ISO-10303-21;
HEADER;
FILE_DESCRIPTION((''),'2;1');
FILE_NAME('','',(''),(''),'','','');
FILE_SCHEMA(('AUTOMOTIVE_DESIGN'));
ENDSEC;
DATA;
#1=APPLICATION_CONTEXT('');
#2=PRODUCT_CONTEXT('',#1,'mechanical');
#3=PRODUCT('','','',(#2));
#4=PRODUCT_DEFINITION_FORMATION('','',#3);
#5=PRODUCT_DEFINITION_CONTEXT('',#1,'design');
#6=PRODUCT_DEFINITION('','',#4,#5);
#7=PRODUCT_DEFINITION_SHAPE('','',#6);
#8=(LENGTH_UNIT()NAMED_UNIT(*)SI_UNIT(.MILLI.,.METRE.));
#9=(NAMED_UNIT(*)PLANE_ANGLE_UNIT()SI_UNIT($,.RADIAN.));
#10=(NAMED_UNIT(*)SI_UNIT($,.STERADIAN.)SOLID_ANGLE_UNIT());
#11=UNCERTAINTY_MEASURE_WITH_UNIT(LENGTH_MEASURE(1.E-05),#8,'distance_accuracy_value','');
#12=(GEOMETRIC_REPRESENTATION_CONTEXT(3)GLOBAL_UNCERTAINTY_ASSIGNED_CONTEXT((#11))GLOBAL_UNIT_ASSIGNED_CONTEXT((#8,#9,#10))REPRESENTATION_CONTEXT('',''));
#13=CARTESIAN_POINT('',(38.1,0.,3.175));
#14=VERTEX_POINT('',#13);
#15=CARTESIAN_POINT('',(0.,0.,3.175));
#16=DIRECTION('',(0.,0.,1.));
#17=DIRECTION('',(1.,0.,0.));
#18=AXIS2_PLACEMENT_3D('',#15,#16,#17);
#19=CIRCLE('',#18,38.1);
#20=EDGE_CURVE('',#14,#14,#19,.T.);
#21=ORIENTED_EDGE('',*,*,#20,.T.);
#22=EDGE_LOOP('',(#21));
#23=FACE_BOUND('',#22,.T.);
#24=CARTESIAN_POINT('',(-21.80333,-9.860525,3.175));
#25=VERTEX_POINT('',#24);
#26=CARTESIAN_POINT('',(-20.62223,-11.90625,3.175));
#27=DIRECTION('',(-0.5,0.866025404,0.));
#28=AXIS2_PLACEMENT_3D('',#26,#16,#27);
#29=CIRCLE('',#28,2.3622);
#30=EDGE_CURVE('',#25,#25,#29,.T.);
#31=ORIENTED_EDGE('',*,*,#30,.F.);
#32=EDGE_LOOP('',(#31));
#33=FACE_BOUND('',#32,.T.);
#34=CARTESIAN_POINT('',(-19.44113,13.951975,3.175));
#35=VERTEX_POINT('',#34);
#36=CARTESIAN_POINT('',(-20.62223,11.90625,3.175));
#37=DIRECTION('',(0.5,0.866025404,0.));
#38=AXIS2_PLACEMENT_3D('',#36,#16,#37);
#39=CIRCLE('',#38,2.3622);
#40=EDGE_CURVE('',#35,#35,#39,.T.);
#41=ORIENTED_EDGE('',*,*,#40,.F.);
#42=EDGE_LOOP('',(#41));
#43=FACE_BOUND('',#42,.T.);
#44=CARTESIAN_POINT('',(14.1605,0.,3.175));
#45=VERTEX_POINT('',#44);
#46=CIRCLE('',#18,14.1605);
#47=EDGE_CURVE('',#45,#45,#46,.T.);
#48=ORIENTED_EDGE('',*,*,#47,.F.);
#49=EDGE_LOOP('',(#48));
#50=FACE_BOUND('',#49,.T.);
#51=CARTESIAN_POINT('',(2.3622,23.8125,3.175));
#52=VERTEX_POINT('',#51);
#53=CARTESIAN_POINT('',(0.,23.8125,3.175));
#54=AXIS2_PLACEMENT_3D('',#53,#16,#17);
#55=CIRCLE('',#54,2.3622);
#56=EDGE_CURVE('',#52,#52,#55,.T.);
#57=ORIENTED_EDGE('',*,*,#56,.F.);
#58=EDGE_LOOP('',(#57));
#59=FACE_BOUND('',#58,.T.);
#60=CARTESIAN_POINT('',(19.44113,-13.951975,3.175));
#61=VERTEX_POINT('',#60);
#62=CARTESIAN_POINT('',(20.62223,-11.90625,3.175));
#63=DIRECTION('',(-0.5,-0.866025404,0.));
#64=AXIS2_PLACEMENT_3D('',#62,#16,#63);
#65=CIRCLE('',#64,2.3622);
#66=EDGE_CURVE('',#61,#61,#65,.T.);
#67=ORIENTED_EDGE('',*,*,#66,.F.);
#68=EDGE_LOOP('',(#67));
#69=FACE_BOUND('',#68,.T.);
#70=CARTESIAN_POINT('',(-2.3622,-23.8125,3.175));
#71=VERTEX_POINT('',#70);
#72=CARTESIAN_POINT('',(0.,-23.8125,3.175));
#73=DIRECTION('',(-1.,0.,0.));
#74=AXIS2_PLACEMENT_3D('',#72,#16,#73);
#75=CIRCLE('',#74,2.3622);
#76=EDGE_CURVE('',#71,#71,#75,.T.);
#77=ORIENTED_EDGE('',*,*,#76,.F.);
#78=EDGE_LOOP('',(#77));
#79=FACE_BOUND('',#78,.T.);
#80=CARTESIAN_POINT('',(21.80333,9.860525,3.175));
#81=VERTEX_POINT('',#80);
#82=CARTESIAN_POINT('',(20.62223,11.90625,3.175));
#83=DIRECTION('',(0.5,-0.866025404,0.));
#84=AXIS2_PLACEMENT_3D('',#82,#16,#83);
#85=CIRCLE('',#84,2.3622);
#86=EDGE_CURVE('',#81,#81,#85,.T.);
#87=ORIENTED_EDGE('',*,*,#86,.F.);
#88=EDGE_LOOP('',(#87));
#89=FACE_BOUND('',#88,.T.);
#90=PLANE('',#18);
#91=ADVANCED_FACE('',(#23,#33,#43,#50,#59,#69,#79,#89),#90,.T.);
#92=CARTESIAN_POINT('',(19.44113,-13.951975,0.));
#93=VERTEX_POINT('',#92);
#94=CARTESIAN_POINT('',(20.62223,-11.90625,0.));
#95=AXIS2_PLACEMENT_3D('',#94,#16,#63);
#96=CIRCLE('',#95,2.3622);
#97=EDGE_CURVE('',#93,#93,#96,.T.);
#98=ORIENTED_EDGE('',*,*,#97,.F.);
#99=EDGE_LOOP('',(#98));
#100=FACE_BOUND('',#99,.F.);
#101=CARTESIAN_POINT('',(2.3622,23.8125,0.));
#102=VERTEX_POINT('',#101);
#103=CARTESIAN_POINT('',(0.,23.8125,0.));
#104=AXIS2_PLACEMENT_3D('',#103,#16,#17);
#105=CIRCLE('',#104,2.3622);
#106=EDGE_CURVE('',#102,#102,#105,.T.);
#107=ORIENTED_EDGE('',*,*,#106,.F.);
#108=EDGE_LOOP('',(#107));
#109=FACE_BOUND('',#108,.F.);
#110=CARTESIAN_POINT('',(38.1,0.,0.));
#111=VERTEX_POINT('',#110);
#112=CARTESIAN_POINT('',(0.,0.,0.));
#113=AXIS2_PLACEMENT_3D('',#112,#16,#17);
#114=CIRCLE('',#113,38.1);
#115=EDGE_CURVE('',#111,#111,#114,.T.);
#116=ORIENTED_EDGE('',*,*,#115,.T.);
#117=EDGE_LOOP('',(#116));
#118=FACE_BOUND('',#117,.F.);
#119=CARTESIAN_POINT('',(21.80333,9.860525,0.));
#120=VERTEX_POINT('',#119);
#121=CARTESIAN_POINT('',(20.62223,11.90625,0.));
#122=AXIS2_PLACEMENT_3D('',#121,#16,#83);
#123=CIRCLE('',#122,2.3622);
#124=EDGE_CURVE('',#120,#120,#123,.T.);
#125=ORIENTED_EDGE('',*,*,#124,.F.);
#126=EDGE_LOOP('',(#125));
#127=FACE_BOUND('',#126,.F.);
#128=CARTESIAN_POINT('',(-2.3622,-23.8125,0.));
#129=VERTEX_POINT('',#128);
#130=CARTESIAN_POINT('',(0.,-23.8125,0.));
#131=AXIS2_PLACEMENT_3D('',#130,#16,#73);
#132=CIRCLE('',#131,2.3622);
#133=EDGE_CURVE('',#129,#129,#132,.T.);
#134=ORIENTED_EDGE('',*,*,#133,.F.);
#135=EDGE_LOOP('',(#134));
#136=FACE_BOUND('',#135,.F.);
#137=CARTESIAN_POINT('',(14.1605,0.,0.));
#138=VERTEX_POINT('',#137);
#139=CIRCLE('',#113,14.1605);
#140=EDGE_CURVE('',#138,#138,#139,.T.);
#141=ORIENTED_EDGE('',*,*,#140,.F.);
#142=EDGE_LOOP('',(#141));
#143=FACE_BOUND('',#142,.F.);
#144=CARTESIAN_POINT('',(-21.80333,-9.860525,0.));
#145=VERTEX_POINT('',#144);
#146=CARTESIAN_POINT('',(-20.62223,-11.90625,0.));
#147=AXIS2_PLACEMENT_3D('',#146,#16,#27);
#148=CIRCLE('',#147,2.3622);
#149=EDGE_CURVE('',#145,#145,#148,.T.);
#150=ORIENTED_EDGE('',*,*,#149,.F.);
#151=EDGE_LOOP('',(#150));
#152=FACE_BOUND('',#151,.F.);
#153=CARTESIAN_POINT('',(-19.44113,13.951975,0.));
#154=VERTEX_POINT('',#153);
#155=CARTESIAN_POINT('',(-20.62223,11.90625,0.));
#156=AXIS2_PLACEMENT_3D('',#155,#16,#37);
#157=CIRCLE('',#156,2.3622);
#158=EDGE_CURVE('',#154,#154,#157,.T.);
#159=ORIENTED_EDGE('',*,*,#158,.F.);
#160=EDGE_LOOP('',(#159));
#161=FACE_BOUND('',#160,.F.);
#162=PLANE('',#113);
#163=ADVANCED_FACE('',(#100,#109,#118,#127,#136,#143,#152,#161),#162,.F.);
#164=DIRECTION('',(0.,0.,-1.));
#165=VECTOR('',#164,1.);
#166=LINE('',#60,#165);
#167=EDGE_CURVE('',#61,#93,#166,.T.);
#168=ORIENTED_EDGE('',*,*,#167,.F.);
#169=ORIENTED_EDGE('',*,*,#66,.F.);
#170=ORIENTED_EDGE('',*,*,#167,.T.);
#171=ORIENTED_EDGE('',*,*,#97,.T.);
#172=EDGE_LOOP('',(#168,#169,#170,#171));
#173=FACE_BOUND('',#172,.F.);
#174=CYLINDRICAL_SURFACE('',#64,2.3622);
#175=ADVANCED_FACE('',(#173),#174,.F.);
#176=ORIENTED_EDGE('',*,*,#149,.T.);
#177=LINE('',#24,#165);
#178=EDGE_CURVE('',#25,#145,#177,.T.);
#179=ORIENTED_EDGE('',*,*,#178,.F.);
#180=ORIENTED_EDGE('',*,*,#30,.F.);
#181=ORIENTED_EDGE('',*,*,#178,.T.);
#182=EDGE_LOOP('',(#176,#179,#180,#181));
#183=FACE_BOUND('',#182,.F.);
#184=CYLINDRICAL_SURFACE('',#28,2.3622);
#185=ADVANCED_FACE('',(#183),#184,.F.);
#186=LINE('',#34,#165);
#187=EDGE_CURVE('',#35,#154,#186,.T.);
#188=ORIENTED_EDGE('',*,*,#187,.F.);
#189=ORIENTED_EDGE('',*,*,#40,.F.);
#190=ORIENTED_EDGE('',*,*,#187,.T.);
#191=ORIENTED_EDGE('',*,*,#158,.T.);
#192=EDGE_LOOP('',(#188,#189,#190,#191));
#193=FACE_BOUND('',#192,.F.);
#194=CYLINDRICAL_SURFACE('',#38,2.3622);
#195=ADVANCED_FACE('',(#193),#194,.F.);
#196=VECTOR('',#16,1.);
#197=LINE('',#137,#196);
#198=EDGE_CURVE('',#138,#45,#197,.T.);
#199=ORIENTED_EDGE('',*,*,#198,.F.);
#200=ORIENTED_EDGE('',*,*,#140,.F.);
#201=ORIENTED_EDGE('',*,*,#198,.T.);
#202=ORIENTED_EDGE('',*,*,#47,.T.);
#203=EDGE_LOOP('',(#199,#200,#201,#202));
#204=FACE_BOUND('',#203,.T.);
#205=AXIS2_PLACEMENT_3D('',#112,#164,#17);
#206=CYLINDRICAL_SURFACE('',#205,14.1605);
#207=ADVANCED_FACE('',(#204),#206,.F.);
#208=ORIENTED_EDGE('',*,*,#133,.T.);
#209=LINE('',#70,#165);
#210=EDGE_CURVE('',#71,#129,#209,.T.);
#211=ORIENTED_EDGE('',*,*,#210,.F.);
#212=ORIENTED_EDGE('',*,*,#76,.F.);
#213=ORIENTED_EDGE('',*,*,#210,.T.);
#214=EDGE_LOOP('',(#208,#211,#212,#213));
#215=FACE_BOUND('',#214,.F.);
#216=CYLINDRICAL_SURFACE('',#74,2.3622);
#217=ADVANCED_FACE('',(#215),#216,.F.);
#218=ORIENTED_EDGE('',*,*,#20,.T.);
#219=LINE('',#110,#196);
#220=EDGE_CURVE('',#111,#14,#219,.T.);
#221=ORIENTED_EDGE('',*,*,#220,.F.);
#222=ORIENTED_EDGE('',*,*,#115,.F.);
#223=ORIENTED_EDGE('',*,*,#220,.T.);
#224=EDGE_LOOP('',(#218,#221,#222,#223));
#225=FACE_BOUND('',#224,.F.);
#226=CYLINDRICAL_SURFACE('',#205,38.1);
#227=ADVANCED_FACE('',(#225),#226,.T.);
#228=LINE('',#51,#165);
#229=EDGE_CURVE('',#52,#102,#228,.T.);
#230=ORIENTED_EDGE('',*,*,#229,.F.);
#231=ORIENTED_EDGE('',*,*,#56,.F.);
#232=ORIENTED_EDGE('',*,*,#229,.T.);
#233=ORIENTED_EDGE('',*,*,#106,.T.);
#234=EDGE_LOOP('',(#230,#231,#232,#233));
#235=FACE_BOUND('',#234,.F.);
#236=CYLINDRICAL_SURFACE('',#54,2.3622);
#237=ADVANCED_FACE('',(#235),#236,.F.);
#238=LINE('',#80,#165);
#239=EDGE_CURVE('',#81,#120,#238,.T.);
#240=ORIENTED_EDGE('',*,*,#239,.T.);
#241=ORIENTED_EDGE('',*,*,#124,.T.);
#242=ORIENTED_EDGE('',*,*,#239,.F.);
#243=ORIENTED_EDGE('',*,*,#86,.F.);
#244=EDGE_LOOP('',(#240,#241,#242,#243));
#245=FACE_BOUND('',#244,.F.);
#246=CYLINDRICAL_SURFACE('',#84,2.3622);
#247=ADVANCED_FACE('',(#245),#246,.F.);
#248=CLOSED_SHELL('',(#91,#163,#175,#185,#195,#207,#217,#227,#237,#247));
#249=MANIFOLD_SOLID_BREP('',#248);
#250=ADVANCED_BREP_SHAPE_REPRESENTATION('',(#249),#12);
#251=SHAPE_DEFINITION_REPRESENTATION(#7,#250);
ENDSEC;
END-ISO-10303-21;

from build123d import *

# Parameters (mm, degrees)
F0_R            = 38.1
F0_R_2          = 14.1605
F1_DEPTH        = 3.175
F2_R            = 2.3622
F3_DEPTH        = 3.176
F3_COPIES_COUNT = 6


# Not quite as in the source:
# - a pattern or mirror of a feature is missing from the dataset's text; its kind, count and spacing are read off the source's solid


with BuildPart() as f1:
    # F0 (on Top) → F1 (new body)
    with BuildSketch(Plane.XY):
        Circle(F0_R)
        Circle(F0_R_2, mode=Mode.SUBTRACT)
    extrude(amount=F1_DEPTH)

    # F2 (on face) → F3 (cut, through all)
    with BuildSketch(Plane.XY.offset(3.175)):
        with Locations((0, 23.8125)):
            Circle(F2_R)
    f3 = extrude(amount=-F3_DEPTH, mode=Mode.SUBTRACT)

    # F3_copies: F3 ×6 about axis
    f3_copies_axis = Axis((0, 0, 0), (0, 0, 1))
    for i in range(1, F3_COPIES_COUNT):
        add(f3.rotate(f3_copies_axis, i * 360 / F3_COPIES_COUNT), mode=Mode.SUBTRACT)


solid = f1.part
